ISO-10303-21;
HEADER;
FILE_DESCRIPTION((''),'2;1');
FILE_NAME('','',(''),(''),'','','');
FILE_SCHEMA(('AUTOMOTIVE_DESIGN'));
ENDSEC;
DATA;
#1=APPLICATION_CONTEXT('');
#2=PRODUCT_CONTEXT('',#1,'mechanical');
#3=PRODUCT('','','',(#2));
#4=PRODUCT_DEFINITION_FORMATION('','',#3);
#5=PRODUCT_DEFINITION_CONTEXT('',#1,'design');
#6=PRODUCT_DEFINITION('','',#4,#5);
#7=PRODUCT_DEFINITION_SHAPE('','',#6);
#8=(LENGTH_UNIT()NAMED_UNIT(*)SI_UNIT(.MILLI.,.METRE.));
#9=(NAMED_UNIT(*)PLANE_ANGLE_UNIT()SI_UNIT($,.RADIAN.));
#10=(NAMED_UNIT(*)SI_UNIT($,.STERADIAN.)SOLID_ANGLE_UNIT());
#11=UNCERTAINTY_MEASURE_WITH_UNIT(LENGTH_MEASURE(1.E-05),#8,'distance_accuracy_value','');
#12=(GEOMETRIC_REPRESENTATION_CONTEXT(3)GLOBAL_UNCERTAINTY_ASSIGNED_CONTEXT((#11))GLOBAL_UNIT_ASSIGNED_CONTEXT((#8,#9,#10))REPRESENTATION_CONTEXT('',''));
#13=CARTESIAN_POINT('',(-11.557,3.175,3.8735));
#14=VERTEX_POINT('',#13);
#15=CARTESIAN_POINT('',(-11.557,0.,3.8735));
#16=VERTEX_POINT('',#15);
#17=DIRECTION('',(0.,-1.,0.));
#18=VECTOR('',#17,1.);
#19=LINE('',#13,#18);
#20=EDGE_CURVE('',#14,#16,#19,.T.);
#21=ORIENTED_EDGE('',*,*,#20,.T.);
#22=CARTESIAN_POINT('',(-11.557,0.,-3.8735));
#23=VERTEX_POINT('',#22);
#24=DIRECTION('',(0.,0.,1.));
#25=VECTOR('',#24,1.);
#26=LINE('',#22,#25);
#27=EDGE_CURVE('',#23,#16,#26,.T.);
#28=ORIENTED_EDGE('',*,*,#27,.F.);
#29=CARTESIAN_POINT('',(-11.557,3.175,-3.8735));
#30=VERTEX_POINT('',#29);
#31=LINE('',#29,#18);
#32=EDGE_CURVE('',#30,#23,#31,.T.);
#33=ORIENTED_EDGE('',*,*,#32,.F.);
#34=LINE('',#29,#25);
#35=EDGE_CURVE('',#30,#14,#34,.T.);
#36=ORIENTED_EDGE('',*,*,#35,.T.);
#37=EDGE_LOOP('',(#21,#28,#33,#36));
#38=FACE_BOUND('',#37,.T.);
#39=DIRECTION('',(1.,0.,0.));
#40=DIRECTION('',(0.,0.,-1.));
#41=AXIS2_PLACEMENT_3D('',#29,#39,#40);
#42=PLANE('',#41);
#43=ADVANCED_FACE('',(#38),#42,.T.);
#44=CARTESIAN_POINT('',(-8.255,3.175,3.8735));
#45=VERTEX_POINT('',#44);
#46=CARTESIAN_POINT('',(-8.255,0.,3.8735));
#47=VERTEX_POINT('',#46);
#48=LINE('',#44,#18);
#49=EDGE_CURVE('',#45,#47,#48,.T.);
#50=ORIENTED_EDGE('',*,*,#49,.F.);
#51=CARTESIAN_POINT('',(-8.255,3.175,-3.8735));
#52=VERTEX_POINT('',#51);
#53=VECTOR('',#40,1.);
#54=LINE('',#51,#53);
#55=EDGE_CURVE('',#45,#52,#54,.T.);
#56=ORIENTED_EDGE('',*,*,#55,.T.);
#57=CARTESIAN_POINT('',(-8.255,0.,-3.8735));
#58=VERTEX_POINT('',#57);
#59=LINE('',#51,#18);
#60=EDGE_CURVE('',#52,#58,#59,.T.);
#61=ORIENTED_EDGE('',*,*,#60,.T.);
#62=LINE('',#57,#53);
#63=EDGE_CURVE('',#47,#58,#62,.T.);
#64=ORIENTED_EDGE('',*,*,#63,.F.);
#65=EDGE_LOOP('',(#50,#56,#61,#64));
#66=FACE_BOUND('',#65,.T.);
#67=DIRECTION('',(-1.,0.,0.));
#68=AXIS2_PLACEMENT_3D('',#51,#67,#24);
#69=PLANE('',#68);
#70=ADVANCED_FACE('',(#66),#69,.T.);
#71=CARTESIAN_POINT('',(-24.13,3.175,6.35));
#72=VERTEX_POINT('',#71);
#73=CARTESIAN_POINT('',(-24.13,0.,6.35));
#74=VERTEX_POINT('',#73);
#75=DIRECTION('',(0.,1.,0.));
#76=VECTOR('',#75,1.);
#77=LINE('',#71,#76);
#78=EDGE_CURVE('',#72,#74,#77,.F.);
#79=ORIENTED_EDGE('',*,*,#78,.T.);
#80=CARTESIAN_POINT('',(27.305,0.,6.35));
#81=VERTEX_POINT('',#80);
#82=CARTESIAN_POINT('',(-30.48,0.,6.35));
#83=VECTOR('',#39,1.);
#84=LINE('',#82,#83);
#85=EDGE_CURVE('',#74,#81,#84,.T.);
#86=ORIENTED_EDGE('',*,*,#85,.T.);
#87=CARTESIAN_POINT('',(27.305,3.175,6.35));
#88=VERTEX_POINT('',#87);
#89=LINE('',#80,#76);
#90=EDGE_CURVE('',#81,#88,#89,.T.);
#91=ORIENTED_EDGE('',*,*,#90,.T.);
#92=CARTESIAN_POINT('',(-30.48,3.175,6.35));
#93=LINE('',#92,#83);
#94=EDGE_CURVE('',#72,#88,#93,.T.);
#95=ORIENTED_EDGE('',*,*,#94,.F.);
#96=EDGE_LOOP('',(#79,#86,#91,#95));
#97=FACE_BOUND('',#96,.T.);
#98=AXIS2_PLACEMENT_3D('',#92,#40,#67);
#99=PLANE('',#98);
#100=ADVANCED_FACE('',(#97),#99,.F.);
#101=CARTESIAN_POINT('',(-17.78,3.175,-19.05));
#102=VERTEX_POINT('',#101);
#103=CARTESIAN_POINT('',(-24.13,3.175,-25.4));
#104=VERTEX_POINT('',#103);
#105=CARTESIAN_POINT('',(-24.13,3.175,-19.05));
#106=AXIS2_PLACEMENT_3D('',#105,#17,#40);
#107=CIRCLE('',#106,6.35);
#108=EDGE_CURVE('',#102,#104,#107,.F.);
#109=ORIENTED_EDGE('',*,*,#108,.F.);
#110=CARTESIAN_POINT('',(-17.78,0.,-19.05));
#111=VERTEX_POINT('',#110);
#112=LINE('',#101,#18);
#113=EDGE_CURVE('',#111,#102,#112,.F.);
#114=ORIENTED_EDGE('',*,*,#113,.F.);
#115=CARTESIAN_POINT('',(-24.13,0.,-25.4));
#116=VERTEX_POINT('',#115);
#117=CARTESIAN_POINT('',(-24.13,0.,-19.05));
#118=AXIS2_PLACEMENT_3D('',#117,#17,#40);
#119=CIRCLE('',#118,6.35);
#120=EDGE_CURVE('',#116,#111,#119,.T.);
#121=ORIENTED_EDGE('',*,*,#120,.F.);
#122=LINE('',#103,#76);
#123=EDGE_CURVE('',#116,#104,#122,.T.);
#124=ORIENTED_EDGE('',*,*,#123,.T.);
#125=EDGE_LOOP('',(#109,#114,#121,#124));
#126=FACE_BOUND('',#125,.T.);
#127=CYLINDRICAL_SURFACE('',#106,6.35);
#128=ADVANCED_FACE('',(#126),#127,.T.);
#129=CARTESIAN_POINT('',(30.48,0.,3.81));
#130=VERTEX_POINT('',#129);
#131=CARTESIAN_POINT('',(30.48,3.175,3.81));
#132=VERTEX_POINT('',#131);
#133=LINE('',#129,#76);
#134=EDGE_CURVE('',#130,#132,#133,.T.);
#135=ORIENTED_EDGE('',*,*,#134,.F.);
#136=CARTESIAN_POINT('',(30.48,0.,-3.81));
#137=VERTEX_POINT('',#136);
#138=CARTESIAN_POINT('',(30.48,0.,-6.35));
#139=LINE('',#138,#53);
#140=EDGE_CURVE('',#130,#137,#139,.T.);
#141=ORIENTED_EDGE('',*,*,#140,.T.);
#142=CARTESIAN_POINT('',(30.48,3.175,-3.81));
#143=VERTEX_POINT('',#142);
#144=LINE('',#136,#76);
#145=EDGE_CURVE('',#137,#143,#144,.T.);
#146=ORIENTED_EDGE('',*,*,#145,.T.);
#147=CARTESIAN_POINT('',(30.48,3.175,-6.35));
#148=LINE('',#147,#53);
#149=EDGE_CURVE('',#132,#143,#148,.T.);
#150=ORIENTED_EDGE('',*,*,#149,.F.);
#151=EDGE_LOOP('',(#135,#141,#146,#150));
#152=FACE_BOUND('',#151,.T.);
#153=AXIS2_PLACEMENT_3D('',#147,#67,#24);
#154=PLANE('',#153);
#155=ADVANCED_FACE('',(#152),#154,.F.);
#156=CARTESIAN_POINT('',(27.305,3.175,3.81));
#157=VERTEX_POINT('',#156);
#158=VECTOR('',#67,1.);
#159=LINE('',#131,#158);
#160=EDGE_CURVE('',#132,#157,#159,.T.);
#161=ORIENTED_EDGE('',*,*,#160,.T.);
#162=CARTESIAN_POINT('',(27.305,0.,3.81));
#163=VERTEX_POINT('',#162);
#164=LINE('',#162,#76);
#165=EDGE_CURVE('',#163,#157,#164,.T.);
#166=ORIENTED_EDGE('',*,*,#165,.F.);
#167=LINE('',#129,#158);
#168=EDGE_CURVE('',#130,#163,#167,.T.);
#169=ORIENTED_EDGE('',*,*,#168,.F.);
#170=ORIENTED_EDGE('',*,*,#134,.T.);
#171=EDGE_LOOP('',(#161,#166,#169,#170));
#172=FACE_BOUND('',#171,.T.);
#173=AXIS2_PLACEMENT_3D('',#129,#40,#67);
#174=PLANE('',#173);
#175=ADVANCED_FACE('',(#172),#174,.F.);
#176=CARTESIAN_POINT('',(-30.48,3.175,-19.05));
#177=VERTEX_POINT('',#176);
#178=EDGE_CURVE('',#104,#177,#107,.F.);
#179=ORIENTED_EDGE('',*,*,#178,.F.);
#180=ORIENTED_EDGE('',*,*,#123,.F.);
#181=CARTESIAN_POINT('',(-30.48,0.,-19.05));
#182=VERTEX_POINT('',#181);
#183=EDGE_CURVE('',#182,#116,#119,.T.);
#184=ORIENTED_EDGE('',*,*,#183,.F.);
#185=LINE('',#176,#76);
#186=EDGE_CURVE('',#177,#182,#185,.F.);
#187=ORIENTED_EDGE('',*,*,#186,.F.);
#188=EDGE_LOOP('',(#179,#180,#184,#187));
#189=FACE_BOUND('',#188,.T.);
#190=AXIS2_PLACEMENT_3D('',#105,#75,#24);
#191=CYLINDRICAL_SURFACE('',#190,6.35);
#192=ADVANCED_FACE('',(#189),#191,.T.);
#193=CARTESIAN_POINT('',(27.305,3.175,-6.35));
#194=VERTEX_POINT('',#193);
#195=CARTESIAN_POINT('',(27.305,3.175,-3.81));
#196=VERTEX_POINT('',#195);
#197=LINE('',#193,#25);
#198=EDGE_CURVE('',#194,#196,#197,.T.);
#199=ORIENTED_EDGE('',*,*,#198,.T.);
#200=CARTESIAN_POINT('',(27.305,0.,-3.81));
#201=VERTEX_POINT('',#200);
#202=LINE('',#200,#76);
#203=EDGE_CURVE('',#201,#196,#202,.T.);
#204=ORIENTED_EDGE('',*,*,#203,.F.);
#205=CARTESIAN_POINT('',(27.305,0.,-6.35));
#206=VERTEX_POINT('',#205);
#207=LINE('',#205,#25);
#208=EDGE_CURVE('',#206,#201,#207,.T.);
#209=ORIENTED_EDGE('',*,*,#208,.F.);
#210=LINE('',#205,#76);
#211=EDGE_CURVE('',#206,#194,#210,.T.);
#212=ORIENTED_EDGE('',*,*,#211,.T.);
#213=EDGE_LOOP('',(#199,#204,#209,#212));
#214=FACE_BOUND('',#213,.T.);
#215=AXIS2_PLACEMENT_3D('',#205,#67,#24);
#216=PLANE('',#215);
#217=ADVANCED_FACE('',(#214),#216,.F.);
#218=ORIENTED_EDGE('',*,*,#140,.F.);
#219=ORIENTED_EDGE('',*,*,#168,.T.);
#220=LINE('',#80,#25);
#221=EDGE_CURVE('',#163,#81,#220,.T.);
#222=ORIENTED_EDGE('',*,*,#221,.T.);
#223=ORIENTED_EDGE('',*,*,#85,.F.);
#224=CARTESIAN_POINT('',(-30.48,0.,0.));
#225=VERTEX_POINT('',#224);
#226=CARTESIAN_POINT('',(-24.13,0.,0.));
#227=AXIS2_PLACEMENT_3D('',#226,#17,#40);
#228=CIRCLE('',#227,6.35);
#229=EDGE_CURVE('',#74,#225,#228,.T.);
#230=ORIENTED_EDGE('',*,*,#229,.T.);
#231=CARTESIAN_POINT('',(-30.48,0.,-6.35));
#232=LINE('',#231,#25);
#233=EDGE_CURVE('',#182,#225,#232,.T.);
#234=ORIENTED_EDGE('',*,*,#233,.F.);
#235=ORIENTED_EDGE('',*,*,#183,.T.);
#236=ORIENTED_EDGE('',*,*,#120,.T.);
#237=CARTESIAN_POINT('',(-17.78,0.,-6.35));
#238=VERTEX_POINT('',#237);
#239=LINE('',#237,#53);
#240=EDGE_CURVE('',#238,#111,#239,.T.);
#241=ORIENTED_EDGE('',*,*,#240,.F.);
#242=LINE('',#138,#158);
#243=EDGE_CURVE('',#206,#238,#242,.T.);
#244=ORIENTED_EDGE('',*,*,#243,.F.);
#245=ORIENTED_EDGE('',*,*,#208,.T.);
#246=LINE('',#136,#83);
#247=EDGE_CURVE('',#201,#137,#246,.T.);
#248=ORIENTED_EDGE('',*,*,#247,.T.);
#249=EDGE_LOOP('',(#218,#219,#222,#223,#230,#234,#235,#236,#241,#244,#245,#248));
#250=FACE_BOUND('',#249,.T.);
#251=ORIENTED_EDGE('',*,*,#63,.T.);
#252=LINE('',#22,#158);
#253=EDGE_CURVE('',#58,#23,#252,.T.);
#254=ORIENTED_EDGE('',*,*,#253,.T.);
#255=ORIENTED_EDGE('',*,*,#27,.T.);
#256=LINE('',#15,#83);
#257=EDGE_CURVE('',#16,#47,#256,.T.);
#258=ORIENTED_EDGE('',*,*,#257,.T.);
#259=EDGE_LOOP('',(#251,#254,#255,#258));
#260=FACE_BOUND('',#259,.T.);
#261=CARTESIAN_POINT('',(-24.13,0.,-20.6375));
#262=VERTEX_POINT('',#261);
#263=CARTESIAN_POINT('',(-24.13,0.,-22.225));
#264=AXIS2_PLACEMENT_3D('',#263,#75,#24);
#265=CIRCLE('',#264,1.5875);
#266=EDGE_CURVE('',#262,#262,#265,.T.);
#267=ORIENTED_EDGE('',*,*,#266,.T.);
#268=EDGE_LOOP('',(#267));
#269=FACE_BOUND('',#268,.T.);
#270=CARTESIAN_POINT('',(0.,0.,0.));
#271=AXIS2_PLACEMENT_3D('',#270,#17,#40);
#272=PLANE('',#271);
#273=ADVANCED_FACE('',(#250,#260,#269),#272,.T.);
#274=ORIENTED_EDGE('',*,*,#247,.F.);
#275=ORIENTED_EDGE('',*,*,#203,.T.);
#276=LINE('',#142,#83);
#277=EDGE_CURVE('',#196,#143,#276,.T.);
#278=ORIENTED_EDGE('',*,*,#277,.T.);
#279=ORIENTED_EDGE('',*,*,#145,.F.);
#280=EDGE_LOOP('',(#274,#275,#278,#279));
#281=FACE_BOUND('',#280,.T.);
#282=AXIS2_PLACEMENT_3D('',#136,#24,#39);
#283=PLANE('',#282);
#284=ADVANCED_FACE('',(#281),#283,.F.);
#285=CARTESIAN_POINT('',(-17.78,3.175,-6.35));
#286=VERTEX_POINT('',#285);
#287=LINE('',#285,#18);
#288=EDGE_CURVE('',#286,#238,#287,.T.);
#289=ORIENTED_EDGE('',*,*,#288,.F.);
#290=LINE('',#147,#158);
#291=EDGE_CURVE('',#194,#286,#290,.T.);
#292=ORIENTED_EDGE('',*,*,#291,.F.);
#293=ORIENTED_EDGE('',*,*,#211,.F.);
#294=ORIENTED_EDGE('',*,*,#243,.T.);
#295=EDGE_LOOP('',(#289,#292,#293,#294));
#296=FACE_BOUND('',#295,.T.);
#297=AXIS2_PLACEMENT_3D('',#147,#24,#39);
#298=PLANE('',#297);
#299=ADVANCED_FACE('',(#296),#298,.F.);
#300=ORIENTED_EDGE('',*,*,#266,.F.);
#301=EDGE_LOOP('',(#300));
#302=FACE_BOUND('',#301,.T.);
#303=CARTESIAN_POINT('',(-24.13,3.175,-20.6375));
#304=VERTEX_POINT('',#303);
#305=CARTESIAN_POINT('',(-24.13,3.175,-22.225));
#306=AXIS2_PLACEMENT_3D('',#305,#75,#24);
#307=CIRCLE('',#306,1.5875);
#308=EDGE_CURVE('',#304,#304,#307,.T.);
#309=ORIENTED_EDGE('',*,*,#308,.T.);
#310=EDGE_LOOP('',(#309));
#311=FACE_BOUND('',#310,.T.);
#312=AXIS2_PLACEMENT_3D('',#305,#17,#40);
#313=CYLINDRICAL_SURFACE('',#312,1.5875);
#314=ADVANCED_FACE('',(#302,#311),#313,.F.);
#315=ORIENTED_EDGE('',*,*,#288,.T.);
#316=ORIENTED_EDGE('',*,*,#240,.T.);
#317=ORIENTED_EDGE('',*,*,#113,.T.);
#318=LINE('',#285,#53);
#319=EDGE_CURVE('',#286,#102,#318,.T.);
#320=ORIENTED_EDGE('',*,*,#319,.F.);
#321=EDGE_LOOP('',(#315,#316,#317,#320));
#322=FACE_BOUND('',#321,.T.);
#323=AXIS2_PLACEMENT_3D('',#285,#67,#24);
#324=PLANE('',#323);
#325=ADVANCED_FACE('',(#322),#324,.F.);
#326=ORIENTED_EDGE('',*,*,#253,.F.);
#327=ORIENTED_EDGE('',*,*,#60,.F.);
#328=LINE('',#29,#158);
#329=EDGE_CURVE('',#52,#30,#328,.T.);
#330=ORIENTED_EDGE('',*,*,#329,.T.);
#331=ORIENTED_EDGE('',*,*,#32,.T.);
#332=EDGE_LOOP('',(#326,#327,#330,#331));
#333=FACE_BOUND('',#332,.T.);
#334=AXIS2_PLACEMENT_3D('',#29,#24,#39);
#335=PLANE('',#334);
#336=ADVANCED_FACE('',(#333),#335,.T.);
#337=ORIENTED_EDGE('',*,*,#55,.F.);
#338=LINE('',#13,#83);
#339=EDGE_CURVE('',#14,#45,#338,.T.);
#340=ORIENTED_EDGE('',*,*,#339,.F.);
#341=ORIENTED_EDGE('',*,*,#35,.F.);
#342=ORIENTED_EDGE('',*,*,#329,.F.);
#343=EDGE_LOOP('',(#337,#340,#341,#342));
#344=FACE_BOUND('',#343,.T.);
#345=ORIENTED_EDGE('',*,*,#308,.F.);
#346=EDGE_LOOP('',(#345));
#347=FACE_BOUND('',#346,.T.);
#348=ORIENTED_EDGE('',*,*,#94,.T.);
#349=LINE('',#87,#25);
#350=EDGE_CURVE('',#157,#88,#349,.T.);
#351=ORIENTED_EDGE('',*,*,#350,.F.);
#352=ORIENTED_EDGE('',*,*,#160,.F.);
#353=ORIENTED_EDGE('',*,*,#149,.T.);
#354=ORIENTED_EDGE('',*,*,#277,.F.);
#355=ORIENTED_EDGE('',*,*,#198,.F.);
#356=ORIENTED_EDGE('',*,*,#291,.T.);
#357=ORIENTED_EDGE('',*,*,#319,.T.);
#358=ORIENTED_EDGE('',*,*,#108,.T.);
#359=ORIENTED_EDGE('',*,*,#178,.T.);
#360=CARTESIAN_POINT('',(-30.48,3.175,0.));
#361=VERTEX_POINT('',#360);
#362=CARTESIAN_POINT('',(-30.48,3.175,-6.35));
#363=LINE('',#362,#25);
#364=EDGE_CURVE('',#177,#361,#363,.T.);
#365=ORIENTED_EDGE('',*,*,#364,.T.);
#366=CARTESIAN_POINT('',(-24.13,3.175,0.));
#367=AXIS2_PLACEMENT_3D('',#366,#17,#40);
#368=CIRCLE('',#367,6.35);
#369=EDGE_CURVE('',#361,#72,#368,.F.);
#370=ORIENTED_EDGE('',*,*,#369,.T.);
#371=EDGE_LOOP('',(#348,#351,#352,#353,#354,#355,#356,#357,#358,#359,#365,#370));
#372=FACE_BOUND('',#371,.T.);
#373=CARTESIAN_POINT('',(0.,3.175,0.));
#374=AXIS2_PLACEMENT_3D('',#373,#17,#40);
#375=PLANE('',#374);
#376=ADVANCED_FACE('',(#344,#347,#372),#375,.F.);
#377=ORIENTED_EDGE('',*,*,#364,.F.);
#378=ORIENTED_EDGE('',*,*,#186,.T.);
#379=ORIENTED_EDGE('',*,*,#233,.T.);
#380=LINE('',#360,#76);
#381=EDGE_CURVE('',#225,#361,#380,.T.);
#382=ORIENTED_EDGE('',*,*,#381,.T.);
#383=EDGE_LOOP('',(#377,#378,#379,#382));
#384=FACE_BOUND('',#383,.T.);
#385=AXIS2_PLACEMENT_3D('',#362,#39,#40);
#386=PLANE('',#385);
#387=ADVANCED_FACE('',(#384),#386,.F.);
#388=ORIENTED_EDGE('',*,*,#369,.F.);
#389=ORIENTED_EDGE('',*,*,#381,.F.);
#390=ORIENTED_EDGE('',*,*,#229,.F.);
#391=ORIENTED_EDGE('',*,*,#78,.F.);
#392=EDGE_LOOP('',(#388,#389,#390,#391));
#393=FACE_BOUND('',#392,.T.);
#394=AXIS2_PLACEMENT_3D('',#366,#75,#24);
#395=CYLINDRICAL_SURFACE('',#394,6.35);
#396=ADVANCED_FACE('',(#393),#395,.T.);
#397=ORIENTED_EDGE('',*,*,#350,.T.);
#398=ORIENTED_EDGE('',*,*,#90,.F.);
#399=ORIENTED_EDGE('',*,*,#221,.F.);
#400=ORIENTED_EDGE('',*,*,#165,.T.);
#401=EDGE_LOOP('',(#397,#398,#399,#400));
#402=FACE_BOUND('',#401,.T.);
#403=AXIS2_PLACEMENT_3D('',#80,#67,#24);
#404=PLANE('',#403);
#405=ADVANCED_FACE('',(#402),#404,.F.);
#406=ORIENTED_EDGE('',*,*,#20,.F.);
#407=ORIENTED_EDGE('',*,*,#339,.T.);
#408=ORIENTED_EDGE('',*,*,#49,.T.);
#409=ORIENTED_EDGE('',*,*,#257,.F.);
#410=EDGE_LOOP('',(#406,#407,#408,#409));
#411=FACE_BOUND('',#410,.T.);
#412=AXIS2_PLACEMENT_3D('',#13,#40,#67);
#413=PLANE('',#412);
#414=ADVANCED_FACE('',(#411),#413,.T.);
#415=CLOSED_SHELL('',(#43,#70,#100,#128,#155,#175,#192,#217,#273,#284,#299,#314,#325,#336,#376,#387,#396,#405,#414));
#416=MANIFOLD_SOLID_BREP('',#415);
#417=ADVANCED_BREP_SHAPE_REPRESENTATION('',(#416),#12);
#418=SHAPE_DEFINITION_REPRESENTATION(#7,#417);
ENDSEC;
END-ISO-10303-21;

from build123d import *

# Parameters (mm, degrees)
SKETCH1_R           = 1.5875
SKETCH1_W           = 3.302
SKETCH1_H           = 7.747
BOSS_EXTRUDE1_DEPTH = 3.175
SKETCH3_W           = 3.175
SKETCH3_H           = 2.54
CUT_EXTRUDE1_DEPTH  = 3.175
FILLET1_R           = 6.35
FILLET2_R           = 6.35
FILLET3_R           = 6.35


with BuildPart() as part:
    # Sketch1 → Boss-Extrude1 (new body)
    with BuildSketch(Plane(origin=(0, 0, 0), x_dir=(1, 0, 0), z_dir=(0, 1, 0))):
        Polygon((30.48, 6.35), (-17.78, 6.35), (-17.78, 25.4), (-30.48, 25.4), (-30.48, 6.35), (-30.48, -6.35), (30.48, -6.35), align=None)
        with Locations(Location((-24.13, 22.225, 0), (0, 0, 270))):
            Circle(SKETCH1_R, mode=Mode.SUBTRACT)
        with Locations((-9.906, 0)):
            Rectangle(SKETCH1_W, SKETCH1_H, mode=Mode.SUBTRACT)
    extrude(amount=BOSS_EXTRUDE1_DEPTH)

    # Sketch3 → Cut-Extrude1 (cut)
    with BuildSketch(Plane(origin=(0, 3.175, 0), x_dir=(1, 0, 0), z_dir=(0, 1, 0))):
        with Locations((28.8925, 5.08)):
            Rectangle(SKETCH3_W, SKETCH3_H)
        with Locations((28.8925, -5.08)):
            Rectangle(SKETCH3_W, SKETCH3_H)
    extrude(amount=-CUT_EXTRUDE1_DEPTH, mode=Mode.SUBTRACT)

    # Fillet1
    fillet1_edges = [part.edges().sort_by_distance(p)[0] for p in [
        (-30.48, 1.5875, -25.4),
    ]]
    fillet(fillet1_edges, radius=FILLET1_R)

    # Fillet2
    fillet2_edges = [part.edges().sort_by_distance(p)[0] for p in [
        (-17.78, 1.5875, -25.4),
    ]]
    fillet(fillet2_edges, radius=FILLET2_R - 0.0001)  # a hair under: the kernel refuses the full size

    # Fillet3
    fillet3_edges = [part.edges().sort_by_distance(p)[0] for p in [
        (-30.48, 1.5875, 6.35),
    ]]
    fillet(fillet3_edges, radius=FILLET3_R)


solid = part.part
